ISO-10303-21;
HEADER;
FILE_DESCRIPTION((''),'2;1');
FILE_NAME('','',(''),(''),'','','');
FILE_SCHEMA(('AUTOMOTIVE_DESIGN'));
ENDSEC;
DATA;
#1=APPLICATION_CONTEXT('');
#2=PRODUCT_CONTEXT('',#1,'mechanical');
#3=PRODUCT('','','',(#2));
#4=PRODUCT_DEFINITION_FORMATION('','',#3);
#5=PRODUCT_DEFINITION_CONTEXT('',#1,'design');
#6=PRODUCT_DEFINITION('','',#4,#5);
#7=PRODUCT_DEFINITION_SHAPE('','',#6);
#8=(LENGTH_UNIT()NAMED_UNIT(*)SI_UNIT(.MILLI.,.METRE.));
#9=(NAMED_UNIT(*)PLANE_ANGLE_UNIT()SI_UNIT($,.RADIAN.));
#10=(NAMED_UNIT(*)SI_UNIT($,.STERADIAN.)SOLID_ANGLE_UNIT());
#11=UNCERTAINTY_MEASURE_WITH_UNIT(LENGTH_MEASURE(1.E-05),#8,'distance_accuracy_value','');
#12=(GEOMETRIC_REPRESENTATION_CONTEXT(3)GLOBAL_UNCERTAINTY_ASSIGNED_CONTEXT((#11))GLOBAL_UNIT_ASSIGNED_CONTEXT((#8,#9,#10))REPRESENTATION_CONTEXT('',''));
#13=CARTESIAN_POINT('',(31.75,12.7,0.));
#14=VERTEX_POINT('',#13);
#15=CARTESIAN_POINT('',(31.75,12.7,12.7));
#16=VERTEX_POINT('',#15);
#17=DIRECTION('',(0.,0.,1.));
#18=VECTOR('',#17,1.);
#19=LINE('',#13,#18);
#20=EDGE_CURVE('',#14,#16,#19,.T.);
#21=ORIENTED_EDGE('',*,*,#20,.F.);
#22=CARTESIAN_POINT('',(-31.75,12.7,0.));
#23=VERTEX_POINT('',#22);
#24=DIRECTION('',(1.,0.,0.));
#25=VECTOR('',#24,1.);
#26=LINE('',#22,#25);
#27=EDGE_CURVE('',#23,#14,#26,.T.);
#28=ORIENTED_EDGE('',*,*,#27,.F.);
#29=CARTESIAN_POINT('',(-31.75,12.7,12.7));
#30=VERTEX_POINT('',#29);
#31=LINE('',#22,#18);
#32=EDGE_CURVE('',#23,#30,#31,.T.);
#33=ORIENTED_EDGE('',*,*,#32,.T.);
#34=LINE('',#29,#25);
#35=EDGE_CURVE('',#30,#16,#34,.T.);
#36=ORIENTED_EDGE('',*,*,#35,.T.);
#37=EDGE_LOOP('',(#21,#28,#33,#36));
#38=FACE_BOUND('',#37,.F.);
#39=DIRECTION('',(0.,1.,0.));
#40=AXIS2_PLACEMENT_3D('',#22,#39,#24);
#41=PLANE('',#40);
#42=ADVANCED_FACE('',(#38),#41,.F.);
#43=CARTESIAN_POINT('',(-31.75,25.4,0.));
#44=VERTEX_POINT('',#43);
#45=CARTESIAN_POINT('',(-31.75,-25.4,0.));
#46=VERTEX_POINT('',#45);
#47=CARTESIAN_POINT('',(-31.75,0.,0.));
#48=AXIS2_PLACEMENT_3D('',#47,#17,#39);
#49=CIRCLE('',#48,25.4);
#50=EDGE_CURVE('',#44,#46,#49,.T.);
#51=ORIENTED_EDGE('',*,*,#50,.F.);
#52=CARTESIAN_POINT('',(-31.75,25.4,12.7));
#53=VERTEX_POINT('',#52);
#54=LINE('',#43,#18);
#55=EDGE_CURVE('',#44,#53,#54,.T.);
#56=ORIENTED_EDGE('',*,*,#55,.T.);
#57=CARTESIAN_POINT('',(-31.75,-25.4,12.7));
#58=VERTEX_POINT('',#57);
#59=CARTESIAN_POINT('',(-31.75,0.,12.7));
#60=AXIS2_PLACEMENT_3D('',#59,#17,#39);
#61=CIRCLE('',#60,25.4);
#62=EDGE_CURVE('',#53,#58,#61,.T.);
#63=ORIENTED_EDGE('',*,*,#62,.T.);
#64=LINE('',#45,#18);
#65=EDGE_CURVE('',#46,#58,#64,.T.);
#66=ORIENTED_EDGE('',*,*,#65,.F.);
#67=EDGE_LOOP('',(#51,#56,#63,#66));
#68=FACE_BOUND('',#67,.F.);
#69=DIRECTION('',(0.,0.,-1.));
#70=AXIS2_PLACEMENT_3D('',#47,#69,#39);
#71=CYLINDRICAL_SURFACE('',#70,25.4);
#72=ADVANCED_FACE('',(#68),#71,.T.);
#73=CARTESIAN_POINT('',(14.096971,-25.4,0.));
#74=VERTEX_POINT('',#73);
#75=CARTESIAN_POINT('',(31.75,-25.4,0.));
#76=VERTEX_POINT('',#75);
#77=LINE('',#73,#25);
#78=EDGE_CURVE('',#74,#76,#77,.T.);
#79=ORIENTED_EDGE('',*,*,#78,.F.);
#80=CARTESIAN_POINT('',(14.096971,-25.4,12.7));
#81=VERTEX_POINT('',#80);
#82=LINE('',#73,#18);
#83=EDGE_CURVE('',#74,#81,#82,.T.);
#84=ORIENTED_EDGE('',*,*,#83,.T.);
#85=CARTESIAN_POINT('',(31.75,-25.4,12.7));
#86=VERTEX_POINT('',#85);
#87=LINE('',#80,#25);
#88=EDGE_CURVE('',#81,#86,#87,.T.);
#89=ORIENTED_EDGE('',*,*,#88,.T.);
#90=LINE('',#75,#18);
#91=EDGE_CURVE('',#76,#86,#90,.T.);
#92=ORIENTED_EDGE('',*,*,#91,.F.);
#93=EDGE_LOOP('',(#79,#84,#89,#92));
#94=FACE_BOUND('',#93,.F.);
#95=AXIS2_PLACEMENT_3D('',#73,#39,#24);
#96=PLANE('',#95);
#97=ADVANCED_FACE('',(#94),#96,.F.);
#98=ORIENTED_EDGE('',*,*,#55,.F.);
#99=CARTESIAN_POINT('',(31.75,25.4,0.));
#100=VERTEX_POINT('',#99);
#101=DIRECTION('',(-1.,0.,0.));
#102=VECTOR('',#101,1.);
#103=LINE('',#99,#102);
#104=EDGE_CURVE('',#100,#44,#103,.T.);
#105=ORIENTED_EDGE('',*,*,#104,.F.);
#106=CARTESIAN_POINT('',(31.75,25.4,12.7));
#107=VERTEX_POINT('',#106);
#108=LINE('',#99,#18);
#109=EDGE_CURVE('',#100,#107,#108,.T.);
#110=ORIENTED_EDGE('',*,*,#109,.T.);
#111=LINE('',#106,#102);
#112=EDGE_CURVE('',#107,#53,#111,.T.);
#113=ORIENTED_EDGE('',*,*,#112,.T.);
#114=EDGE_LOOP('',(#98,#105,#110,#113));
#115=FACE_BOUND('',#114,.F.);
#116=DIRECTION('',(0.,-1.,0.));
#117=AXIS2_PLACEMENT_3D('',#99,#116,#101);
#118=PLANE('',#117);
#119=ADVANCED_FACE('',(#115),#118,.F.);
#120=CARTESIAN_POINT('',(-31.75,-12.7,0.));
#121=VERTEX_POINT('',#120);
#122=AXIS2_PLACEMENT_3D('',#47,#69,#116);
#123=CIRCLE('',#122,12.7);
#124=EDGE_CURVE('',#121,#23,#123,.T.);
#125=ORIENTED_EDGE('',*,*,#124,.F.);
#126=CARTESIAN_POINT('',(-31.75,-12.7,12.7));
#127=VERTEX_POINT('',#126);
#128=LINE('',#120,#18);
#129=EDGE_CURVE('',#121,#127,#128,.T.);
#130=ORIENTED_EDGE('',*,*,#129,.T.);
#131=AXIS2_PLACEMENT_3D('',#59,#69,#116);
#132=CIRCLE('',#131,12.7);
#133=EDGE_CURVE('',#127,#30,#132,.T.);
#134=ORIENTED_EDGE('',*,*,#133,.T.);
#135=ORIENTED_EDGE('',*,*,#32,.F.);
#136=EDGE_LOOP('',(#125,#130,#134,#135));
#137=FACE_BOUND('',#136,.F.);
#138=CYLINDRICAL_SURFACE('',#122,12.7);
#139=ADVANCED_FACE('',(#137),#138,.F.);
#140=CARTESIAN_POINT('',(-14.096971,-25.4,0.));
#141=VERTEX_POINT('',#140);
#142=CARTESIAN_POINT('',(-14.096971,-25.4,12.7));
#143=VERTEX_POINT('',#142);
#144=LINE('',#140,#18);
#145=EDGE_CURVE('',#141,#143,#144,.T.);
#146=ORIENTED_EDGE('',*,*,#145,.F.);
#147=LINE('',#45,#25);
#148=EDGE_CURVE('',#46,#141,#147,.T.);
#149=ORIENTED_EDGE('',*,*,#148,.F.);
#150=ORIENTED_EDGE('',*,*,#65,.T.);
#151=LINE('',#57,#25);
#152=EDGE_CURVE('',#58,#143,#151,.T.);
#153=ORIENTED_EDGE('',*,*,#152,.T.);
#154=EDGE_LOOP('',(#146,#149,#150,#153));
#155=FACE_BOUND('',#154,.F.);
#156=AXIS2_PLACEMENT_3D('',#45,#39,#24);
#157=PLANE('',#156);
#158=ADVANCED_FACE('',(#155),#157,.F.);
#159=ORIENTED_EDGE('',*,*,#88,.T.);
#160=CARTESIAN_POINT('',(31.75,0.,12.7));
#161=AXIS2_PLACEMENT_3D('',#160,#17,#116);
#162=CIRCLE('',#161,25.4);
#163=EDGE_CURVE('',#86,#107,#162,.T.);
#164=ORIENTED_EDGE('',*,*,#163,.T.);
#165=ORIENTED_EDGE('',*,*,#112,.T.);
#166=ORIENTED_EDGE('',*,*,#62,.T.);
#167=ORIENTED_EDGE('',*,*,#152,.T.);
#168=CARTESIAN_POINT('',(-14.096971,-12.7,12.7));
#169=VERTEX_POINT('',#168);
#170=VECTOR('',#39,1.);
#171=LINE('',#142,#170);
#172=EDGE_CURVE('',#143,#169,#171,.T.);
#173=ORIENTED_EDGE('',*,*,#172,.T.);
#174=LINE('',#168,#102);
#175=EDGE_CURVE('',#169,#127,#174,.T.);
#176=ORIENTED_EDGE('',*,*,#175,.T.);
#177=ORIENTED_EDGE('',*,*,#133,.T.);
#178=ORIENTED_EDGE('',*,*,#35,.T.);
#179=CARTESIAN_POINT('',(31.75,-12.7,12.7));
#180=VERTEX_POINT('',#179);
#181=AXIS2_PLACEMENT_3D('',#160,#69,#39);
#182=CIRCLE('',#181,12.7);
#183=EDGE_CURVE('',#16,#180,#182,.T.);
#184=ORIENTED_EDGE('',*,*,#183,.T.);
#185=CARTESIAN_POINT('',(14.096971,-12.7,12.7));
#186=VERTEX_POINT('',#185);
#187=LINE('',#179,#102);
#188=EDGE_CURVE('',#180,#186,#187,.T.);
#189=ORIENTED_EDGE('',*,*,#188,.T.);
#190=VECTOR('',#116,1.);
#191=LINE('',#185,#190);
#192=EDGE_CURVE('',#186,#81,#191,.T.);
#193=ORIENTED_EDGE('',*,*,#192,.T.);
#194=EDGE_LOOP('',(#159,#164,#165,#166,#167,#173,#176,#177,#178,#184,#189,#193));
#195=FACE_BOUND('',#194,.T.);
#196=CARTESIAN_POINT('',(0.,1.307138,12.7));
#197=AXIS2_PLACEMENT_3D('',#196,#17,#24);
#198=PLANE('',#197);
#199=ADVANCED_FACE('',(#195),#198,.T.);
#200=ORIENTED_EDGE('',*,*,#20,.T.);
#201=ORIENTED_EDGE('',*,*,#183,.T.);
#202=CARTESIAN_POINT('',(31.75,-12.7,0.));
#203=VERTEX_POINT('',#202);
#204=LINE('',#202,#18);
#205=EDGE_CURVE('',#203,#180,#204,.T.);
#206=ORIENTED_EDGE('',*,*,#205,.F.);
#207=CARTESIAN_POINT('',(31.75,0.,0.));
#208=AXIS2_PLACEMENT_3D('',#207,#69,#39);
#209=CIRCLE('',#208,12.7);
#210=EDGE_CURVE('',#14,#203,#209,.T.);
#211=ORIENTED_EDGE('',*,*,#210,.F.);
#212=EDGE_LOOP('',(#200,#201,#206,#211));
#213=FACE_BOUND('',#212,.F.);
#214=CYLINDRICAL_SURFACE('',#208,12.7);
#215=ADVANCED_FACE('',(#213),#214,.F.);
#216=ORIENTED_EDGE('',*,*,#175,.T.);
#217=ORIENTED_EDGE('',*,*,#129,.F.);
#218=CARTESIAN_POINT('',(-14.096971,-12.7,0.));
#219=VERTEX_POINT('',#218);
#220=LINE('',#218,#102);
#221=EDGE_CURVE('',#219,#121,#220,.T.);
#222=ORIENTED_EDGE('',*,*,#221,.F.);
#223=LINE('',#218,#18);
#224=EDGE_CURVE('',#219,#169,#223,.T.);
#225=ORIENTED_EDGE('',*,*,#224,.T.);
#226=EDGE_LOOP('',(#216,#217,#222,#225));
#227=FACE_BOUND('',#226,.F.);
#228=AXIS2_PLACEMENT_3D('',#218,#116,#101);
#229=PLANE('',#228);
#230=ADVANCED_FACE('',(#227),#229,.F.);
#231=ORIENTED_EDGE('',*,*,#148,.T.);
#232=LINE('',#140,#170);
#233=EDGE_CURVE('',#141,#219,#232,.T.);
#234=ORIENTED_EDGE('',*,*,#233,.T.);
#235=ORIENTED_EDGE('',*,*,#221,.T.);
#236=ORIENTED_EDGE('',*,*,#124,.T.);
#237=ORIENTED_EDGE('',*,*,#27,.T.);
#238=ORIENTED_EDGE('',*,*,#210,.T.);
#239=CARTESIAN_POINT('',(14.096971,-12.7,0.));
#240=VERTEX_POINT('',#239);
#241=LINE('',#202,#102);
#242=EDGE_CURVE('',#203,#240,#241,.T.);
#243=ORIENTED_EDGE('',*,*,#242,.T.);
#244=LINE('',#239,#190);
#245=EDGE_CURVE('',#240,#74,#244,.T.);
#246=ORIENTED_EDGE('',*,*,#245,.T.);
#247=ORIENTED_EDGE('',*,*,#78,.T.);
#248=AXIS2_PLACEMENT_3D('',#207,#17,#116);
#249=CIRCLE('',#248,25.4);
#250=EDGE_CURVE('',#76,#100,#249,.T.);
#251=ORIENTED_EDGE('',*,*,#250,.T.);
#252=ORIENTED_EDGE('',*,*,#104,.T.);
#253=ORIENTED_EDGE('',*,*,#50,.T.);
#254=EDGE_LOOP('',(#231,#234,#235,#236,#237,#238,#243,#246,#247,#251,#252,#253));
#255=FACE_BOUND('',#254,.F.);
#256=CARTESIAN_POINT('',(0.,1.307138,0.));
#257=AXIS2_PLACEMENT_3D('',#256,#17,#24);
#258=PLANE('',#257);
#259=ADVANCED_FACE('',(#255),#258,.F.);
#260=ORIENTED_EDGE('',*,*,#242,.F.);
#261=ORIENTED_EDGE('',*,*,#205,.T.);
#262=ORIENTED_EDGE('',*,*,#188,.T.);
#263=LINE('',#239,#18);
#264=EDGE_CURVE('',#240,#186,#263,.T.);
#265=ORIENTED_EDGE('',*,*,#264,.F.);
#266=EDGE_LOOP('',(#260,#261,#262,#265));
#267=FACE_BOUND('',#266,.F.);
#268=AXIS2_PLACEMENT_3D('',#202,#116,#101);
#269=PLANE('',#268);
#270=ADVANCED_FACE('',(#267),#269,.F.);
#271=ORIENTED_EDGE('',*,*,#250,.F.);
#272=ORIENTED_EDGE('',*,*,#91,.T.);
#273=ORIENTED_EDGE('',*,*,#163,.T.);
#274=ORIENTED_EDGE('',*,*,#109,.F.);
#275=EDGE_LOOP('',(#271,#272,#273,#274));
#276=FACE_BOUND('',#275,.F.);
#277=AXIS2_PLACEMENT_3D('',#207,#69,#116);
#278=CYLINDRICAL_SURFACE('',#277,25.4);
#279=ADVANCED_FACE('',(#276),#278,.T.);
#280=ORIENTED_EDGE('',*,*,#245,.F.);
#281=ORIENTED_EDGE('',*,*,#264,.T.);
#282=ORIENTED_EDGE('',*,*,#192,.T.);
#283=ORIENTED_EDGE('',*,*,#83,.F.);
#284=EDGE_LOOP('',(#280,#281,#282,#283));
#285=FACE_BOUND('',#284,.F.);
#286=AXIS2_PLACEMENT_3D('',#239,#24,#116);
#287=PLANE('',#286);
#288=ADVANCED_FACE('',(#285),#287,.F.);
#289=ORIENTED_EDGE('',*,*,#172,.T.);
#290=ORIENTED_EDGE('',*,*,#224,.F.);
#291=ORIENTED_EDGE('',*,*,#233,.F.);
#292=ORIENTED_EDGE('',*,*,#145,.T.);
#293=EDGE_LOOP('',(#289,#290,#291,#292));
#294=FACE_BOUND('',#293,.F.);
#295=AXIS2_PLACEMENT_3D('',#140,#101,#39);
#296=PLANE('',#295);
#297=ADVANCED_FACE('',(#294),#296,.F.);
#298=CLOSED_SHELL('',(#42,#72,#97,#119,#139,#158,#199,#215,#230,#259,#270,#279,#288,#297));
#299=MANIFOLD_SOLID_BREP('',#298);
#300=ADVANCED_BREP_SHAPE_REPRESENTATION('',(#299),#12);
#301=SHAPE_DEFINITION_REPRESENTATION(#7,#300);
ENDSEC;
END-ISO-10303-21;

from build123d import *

# Parameters (mm, degrees)
F1_DEPTH = 12.7


# Not quite as in the source:
# - a feature of the source that left no trace in its solid (it failed there, or was rolled back) is left out


with BuildPart() as f1:
    # F0 (on Top) → F1 (new body)
    with BuildSketch(Plane.XY):
        with BuildLine():
            ThreePointArc((31.75, 12.7), (44.45, 0), (31.75, -12.7))
            Line((31.75, -12.7), (14.0969706699, -12.7))
            Line((14.0969706699, -12.7), (14.0969706699, -25.4))
            Line((14.0969706699, -25.4), (31.75, -25.4))
            ThreePointArc((31.75, -25.4), (57.15, 0), (31.75, 25.4))
            Line((31.75, 25.4), (0, 25.4))
            Line((0, 25.4), (-31.75, 25.4))
            ThreePointArc((-31.75, 25.4), (-57.15, 0), (-31.75, -25.4))
            Line((-31.75, -25.4), (-14.0969706699, -25.4))
            Line((-14.0969706699, -25.4), (-14.0969706699, -12.7))
            Line((-14.0969706699, -12.7), (-31.75, -12.7))
            ThreePointArc((-31.75, -12.7), (-44.45, 0), (-31.75, 12.7))
            Line((-31.75, 12.7), (0, 12.7))
            Line((0, 12.7), (31.75, 12.7))
        make_face()
    extrude(amount=F1_DEPTH)


solid = f1.part
